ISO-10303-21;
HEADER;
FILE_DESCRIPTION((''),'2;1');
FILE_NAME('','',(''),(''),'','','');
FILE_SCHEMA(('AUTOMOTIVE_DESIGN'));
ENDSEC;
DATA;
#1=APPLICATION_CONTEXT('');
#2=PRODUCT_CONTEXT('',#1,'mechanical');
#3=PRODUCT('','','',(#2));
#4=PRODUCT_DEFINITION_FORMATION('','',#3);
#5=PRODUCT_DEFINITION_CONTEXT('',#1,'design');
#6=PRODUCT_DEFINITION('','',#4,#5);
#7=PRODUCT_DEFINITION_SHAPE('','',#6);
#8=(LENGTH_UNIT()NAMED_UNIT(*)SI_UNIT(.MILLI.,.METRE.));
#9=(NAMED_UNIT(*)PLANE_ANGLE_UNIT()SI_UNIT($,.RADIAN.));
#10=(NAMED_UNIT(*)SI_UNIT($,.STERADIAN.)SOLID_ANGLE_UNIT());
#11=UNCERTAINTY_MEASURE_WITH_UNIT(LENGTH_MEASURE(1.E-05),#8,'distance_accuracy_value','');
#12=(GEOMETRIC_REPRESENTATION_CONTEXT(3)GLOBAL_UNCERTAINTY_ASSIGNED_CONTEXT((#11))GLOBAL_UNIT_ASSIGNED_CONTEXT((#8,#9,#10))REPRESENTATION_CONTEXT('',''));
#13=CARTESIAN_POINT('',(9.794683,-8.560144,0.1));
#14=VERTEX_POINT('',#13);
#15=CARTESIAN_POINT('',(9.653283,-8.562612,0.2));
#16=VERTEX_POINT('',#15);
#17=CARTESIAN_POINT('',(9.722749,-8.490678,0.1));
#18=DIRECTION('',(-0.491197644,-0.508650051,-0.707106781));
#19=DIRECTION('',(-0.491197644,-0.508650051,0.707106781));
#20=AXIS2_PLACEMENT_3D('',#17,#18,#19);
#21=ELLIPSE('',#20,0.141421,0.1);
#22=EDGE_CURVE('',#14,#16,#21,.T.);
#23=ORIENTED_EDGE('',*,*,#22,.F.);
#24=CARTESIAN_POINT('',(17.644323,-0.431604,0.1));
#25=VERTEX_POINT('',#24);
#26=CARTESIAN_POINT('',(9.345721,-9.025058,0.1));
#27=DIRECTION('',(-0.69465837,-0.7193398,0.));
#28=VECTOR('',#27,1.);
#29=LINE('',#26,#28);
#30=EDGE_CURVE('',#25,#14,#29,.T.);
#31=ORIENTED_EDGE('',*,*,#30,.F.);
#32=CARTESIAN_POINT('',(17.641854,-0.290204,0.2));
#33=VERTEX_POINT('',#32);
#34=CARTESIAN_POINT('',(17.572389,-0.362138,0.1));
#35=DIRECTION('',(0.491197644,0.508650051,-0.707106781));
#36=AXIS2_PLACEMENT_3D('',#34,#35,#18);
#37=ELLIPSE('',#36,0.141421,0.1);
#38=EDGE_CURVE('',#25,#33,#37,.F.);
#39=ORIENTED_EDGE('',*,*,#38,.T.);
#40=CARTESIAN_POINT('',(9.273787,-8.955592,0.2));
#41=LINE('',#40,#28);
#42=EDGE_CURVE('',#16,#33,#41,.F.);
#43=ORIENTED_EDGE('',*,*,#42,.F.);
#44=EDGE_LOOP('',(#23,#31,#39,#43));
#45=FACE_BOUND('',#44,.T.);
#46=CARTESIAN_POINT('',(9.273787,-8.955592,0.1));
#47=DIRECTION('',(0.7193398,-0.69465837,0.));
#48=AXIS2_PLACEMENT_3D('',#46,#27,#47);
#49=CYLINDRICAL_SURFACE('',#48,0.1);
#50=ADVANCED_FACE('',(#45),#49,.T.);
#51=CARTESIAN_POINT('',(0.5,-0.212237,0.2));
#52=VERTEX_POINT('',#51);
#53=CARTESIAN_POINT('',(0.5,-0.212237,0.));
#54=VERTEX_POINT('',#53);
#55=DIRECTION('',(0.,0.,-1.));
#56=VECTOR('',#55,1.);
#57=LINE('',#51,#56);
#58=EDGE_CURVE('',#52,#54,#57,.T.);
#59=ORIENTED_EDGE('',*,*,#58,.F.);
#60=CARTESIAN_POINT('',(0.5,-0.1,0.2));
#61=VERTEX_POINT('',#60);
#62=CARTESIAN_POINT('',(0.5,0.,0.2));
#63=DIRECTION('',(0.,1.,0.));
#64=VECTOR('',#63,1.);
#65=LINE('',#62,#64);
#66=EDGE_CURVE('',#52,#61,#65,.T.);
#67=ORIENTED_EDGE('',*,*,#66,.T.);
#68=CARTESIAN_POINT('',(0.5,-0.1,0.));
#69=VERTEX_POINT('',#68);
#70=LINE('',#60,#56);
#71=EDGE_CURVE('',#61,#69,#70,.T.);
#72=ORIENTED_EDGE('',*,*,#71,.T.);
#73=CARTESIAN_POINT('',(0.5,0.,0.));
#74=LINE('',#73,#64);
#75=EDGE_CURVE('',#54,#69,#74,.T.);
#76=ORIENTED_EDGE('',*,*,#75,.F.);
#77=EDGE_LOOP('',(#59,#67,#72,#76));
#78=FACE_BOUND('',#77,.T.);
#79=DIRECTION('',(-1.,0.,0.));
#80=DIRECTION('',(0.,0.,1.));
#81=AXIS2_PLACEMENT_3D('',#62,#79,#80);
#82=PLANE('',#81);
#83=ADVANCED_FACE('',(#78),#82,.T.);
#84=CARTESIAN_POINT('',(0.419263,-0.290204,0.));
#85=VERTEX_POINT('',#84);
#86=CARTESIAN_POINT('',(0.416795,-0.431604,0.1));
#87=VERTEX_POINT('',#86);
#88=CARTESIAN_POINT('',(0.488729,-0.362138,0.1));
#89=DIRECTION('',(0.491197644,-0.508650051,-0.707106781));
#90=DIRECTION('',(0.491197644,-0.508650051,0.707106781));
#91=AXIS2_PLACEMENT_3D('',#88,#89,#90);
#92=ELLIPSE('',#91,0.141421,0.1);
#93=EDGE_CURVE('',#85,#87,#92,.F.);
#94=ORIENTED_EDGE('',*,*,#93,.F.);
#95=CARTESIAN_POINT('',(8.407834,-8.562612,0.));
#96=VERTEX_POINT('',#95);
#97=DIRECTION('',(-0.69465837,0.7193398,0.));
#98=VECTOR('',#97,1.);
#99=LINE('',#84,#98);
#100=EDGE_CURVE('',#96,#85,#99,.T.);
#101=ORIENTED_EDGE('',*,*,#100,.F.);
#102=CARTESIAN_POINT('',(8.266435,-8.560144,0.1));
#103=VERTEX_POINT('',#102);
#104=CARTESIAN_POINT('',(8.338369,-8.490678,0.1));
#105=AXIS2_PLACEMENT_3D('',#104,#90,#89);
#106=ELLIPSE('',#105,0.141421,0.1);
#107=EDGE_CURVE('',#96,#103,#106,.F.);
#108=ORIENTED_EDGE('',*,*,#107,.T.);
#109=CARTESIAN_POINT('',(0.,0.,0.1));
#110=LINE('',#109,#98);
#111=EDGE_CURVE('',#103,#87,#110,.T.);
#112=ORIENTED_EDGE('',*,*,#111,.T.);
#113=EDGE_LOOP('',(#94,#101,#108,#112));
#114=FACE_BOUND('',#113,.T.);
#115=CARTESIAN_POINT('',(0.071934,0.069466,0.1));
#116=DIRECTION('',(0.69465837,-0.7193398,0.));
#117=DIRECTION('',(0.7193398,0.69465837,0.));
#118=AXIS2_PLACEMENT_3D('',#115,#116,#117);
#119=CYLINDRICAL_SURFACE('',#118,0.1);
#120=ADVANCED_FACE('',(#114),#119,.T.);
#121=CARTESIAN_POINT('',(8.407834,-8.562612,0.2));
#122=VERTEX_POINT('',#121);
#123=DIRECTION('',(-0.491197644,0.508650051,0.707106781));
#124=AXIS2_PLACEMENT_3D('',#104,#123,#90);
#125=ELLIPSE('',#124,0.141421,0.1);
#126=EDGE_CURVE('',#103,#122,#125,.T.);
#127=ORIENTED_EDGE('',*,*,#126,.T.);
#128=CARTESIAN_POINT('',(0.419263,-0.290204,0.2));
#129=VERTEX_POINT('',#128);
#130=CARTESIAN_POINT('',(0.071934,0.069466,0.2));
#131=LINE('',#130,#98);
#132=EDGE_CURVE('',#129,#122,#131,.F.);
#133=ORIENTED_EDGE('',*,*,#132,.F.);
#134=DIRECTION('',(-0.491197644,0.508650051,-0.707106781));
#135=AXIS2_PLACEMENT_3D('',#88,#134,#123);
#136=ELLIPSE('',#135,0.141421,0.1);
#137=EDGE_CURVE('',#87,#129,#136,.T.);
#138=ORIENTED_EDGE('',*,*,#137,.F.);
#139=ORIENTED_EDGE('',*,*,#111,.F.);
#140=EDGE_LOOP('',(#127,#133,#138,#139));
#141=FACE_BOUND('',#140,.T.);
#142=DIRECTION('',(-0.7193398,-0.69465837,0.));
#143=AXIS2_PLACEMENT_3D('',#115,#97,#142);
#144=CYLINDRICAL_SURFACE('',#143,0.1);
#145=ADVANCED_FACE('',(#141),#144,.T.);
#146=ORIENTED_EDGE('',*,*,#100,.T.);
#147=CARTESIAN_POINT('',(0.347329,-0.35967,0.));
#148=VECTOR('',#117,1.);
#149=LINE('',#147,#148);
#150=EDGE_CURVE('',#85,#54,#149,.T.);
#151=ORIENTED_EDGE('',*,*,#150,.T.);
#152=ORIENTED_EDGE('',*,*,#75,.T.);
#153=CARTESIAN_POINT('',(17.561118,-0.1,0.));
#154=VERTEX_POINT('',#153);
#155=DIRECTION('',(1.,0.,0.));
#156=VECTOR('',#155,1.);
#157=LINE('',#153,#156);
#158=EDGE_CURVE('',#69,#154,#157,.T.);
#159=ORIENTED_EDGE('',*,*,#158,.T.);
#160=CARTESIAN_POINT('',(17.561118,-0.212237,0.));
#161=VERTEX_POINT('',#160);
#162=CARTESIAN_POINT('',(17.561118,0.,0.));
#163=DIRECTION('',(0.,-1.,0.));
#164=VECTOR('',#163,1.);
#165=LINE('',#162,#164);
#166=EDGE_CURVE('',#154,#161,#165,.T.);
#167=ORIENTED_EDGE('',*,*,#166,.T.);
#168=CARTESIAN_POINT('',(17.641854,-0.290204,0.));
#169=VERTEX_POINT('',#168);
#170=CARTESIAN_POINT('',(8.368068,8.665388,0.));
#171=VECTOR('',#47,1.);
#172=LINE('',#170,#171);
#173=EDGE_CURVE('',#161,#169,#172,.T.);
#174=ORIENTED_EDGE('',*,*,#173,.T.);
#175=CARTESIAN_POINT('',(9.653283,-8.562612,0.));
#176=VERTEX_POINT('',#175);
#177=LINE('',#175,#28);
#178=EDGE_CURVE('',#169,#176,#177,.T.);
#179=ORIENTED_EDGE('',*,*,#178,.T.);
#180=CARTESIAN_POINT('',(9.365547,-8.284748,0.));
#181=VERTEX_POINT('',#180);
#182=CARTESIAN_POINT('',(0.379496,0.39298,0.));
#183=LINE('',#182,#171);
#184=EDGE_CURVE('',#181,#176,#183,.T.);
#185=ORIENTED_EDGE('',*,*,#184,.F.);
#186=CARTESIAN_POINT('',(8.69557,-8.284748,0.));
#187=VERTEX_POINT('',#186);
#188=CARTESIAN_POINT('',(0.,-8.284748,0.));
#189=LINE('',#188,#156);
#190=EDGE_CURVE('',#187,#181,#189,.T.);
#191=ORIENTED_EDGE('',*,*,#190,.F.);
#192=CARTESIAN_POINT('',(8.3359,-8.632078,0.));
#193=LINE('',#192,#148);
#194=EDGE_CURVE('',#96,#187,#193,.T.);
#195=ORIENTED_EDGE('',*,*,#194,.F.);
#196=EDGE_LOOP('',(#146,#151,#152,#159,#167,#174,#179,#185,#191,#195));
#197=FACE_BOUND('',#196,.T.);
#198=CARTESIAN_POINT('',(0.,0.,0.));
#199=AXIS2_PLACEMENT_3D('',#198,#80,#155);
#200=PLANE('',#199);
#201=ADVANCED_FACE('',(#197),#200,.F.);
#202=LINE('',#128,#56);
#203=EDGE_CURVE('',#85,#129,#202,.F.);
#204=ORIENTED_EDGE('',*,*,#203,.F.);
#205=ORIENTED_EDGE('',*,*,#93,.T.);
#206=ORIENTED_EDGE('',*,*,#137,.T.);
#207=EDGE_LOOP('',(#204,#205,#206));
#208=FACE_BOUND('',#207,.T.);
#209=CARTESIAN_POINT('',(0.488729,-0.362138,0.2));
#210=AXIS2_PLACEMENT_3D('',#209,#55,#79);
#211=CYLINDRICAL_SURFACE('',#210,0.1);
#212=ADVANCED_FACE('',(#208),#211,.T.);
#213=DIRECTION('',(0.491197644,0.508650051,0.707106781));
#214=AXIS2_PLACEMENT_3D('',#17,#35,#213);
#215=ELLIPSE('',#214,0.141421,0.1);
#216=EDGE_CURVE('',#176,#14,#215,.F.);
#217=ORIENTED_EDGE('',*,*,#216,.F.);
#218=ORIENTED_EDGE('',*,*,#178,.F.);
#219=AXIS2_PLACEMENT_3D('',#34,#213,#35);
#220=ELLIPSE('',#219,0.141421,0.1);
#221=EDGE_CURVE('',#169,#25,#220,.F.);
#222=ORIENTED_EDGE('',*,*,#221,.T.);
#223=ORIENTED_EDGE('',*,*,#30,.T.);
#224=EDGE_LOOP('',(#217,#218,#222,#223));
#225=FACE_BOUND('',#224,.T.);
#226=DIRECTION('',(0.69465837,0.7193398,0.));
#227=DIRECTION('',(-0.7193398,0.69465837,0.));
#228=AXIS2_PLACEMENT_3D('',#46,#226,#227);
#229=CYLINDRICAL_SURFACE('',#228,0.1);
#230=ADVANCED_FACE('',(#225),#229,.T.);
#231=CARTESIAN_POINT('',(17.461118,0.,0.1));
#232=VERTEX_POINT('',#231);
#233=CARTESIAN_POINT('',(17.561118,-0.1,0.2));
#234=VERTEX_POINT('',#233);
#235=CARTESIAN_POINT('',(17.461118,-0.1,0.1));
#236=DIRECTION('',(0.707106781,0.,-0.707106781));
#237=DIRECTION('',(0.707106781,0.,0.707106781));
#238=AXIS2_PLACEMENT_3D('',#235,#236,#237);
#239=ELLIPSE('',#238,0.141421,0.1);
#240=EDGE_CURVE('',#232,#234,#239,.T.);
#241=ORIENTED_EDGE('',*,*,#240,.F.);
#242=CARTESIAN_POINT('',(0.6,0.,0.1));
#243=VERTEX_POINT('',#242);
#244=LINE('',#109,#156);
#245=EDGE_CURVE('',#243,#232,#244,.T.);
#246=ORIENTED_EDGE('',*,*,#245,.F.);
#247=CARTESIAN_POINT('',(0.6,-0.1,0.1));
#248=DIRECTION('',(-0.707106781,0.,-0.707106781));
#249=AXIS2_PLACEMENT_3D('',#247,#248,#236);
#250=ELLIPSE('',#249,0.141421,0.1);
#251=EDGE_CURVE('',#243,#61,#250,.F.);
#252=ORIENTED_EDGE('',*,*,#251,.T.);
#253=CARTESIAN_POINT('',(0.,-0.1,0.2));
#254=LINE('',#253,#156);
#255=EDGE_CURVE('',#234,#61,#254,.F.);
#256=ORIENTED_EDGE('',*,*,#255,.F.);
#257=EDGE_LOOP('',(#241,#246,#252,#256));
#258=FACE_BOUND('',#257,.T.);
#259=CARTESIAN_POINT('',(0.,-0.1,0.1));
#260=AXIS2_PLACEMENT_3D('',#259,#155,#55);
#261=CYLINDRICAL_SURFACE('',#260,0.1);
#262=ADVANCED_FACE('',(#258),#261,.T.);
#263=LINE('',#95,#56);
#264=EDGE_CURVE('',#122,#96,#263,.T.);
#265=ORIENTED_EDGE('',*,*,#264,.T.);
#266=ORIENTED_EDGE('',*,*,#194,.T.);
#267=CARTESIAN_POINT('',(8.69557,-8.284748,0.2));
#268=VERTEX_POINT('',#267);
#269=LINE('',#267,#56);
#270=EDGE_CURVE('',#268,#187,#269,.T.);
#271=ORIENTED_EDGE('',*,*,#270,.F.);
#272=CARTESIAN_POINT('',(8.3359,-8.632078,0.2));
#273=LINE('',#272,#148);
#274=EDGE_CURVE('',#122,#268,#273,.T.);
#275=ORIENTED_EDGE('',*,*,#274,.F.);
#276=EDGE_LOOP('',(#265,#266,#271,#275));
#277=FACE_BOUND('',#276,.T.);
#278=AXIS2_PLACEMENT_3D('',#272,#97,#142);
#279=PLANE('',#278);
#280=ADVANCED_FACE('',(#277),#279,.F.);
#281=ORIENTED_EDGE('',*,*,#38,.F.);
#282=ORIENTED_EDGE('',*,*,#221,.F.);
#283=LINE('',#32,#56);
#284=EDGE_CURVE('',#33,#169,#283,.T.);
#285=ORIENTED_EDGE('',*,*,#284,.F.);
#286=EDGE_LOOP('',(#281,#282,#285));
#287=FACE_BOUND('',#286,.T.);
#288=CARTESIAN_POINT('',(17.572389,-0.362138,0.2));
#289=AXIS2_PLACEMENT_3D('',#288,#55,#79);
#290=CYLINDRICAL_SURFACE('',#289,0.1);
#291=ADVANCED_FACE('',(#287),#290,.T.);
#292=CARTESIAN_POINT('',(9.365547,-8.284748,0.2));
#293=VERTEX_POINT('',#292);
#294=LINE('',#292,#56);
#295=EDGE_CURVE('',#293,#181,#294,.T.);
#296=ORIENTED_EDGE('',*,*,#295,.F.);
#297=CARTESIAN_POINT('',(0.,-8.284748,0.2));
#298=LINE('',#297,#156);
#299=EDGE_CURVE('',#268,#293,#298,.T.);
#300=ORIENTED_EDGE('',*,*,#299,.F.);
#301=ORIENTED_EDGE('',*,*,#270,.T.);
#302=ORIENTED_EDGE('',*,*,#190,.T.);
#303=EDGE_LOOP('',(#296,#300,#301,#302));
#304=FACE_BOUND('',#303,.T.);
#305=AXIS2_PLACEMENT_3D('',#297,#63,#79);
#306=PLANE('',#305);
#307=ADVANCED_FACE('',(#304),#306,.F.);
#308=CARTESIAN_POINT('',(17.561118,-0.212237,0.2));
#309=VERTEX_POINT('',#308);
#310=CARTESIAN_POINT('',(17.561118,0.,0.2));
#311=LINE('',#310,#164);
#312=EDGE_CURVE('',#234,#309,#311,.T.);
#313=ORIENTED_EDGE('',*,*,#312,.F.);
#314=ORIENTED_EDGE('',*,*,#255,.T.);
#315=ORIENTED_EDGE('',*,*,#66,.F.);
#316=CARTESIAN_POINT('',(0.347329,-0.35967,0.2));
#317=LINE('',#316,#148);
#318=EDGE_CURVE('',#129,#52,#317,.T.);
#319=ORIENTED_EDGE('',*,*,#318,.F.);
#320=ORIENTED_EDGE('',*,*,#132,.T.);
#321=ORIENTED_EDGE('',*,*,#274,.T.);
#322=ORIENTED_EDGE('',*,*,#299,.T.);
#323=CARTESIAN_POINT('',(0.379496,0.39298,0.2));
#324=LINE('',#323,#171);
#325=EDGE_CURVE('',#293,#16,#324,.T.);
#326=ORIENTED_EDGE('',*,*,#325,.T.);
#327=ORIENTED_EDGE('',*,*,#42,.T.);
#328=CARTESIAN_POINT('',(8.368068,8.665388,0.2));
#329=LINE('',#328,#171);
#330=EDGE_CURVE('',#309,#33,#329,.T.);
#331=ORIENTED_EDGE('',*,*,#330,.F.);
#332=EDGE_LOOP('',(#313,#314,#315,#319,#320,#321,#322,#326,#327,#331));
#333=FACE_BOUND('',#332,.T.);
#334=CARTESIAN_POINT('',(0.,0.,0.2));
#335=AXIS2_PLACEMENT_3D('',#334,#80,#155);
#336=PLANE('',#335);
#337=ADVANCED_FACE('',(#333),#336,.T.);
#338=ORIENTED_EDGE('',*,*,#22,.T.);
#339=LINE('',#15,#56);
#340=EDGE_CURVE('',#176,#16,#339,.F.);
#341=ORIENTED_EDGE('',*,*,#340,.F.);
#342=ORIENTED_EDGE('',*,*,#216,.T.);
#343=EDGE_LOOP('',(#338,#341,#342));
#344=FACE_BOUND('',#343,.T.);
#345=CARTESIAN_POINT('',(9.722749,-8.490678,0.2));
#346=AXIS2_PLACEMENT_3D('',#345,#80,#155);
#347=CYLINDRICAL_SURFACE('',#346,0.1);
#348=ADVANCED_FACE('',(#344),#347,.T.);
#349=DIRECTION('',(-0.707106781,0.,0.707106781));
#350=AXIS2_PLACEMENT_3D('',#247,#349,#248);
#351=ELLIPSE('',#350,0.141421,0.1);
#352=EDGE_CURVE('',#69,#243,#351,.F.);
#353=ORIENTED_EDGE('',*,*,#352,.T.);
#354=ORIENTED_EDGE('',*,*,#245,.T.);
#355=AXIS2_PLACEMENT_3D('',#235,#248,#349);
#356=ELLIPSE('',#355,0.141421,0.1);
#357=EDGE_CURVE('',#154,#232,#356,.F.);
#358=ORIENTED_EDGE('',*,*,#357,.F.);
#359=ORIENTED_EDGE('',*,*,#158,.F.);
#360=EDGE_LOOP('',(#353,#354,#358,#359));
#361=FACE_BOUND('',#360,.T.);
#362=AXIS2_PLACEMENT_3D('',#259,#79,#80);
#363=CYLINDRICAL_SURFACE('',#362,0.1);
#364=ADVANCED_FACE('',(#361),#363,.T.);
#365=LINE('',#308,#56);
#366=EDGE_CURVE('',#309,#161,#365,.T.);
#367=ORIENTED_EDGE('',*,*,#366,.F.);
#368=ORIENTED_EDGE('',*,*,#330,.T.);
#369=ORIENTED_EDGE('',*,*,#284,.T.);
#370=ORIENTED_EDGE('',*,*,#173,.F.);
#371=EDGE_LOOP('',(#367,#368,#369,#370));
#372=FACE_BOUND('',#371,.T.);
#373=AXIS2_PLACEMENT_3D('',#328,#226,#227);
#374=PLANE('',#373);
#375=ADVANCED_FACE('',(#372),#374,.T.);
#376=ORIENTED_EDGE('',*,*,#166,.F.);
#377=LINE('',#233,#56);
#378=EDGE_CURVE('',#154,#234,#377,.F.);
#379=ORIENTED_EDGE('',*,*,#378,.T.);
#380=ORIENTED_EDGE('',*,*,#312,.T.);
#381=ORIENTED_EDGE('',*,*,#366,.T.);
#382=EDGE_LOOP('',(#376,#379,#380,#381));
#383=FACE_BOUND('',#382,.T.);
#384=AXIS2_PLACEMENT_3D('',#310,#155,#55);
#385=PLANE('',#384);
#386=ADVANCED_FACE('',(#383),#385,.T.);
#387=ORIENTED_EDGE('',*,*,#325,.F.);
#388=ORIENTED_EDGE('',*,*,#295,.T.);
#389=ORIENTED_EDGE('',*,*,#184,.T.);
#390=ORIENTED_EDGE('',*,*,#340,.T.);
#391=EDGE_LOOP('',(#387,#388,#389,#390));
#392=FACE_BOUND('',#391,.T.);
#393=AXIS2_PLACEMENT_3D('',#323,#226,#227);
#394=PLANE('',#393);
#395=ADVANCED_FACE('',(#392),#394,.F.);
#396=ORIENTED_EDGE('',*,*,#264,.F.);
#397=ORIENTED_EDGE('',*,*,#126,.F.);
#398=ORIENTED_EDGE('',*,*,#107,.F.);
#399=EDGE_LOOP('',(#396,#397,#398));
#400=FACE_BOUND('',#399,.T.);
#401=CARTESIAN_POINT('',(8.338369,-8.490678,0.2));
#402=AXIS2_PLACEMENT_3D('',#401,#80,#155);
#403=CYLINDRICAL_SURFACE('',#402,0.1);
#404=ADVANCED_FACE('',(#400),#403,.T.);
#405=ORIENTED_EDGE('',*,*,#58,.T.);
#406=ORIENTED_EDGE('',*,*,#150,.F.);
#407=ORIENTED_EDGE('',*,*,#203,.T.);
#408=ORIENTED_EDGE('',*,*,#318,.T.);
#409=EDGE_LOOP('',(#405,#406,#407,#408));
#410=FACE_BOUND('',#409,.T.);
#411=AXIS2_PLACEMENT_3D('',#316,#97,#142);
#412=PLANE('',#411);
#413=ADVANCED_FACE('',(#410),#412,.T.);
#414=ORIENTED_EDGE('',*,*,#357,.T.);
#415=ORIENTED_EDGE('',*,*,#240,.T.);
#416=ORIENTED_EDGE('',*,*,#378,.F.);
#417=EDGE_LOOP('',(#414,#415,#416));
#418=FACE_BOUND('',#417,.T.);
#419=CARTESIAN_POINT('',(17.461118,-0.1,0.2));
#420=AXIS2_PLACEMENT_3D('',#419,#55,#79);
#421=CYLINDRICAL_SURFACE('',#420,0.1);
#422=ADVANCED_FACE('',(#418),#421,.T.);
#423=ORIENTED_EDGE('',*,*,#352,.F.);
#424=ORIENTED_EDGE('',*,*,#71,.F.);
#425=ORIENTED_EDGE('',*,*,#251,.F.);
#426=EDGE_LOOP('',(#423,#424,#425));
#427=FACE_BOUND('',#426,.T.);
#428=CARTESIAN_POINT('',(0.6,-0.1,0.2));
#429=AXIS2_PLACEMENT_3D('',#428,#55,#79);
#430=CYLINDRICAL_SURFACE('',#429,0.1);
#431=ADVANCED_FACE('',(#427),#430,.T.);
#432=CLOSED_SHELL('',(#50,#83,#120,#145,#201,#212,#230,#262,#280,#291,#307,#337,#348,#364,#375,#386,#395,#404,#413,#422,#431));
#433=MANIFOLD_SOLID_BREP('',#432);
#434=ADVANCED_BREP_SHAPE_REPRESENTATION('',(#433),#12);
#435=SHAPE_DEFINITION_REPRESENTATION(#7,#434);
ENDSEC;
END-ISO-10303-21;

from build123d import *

# Parameters (mm, degrees)
EXTRUDE_1_DEPTH = 0.2
FILLET_1_R      = 0.1


with BuildPart() as part:
    # 草图1 → 凸台-拉伸1 (new body)
    with BuildSketch(Plane.XY):
        Polygon((17.561117632, 0), (0.5, 0), (0.5, -0.212237408), (0.347329185, -0.3596699), (8.335900446, -8.632077604), (8.695570346, -8.284748419), (9.365547286, -8.284748419), (9.725217186, -8.632077604), (17.713788447, -0.3596699), (17.561117632, -0.212237408), align=None)
    extrude(amount=EXTRUDE_1_DEPTH)

    # 圆角1
    fillet_1_edges = [part.edges().sort_by_distance(p)[0] for p in [
        (4.341614815, -4.495873752, 0),
        (9.030558816, 0, 0),
        (13.719502817, -4.495873752, 0),
        (13.719502817, -4.495873752, 0.2),
        (8.335900446, -8.632077604, 0.1),
        (0.347329185, -0.3596699, 0.1),
        (0.5, 0, 0.1),
        (17.561117632, 0, 0.1),
        (17.713788447, -0.3596699, 0.1),
        (9.725217186, -8.632077604, 0.1),
        (9.030558816, 0, 0.2),
        (4.341614815, -4.495873752, 0.2),
    ]]
    fillet(fillet_1_edges, radius=FILLET_1_R - 0.0001)  # a hair under: the kernel refuses the full size


solid = part.part
